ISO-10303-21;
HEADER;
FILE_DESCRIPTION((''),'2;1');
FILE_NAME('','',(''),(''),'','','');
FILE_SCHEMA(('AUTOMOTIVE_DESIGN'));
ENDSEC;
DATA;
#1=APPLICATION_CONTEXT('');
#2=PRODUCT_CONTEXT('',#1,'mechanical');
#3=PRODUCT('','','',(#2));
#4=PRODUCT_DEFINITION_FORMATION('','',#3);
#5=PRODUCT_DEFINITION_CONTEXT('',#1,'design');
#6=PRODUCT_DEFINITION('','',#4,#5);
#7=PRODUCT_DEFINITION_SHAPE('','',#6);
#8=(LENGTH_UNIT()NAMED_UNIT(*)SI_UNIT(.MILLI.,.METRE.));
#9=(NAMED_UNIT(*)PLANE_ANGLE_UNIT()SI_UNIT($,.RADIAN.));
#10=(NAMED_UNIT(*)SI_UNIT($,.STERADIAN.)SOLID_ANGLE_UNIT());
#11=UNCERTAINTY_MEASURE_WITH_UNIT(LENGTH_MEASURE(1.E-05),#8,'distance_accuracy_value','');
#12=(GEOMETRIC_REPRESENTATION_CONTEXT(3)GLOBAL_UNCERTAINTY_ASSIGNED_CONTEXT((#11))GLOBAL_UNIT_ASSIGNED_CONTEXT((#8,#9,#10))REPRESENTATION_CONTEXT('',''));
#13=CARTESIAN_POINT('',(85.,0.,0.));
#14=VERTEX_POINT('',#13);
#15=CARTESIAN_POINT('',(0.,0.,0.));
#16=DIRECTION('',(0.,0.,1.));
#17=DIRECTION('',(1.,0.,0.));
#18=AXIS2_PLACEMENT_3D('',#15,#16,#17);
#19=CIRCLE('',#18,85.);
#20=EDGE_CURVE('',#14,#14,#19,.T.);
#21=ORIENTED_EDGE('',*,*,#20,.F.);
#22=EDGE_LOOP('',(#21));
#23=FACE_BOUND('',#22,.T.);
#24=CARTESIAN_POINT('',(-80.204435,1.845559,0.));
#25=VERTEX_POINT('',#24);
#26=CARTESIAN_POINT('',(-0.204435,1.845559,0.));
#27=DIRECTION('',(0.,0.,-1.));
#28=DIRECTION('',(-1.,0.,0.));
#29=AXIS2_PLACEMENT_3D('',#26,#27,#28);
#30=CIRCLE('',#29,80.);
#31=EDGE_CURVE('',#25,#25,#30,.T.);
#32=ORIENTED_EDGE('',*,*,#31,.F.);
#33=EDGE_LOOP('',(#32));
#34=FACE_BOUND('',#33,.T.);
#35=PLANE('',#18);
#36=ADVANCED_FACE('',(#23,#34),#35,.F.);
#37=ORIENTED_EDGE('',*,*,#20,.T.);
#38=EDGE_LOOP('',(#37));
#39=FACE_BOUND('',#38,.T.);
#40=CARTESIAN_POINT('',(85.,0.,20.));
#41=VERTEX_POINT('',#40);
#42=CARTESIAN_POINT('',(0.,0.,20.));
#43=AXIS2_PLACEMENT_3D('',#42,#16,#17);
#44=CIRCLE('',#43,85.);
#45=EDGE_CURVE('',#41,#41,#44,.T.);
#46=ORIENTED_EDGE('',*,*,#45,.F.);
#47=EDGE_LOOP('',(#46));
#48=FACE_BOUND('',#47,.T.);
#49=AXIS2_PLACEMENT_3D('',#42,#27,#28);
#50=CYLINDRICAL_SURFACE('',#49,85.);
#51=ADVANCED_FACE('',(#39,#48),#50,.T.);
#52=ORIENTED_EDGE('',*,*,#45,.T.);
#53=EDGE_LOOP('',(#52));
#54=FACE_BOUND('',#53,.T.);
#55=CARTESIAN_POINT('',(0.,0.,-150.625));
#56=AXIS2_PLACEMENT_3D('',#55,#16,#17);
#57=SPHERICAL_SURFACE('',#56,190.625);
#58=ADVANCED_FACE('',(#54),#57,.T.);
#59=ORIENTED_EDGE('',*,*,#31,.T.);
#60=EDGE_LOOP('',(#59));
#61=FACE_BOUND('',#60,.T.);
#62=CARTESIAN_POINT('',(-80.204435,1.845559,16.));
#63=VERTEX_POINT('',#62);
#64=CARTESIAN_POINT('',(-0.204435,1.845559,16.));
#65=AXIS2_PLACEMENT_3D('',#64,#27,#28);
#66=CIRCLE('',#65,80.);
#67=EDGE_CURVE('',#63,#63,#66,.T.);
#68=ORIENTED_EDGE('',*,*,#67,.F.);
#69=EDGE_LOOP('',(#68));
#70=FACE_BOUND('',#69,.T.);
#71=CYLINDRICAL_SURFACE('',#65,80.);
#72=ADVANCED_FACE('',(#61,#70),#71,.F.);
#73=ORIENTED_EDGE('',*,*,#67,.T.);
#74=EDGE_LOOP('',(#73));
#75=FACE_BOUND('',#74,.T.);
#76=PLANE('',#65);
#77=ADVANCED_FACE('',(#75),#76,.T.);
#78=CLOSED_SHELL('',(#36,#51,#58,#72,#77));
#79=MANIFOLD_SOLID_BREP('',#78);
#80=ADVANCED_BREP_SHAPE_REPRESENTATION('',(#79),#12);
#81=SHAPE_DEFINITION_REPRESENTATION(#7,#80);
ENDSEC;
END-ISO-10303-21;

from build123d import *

# Parameters (mm, degrees)
SKETCH8_R           = 85
BOSS_EXTRUDE5_DEPTH = 20
DOME4_FACE_RADIUS   = 85
DOME4_HEIGHT        = 20
HOLE5_OUTLINE_R     = 80
HOLE5_DEPTH         = 16


# Read off the part's stored shape, not the designer's step: Hole5
with BuildPart() as part:
    # Sketch8 → Boss-Extrude5 (new body)
    with BuildSketch(Plane.XY):
        Circle(SKETCH8_R)
    extrude(amount=BOSS_EXTRUDE5_DEPTH)

    # Dome4: a dome of height H over a round flat face of radius A is a cap of a sphere of radius (A * A + H * H) / (2 * H)
    dome4_r = (DOME4_FACE_RADIUS * DOME4_FACE_RADIUS + DOME4_HEIGHT * DOME4_HEIGHT) / (2 * DOME4_HEIGHT)
    dome4_base = Plane((0, 0, 20), z_dir=(0, 0, 1))
    with Locations(dome4_base.offset(DOME4_HEIGHT - dome4_r)):
        dome4_ball = Sphere(dome4_r, mode=Mode.PRIVATE)
    add(split(dome4_ball, bisect_by=dome4_base, keep=Keep.TOP, mode=Mode.PRIVATE))

    # Hole5 outline → Hole5 (cut)
    with BuildSketch(Plane.XY):
        with Locations((-0.204435363, 1.845559102)):
            Circle(HOLE5_OUTLINE_R)
    extrude(amount=HOLE5_DEPTH, mode=Mode.SUBTRACT)


solid = part.part
